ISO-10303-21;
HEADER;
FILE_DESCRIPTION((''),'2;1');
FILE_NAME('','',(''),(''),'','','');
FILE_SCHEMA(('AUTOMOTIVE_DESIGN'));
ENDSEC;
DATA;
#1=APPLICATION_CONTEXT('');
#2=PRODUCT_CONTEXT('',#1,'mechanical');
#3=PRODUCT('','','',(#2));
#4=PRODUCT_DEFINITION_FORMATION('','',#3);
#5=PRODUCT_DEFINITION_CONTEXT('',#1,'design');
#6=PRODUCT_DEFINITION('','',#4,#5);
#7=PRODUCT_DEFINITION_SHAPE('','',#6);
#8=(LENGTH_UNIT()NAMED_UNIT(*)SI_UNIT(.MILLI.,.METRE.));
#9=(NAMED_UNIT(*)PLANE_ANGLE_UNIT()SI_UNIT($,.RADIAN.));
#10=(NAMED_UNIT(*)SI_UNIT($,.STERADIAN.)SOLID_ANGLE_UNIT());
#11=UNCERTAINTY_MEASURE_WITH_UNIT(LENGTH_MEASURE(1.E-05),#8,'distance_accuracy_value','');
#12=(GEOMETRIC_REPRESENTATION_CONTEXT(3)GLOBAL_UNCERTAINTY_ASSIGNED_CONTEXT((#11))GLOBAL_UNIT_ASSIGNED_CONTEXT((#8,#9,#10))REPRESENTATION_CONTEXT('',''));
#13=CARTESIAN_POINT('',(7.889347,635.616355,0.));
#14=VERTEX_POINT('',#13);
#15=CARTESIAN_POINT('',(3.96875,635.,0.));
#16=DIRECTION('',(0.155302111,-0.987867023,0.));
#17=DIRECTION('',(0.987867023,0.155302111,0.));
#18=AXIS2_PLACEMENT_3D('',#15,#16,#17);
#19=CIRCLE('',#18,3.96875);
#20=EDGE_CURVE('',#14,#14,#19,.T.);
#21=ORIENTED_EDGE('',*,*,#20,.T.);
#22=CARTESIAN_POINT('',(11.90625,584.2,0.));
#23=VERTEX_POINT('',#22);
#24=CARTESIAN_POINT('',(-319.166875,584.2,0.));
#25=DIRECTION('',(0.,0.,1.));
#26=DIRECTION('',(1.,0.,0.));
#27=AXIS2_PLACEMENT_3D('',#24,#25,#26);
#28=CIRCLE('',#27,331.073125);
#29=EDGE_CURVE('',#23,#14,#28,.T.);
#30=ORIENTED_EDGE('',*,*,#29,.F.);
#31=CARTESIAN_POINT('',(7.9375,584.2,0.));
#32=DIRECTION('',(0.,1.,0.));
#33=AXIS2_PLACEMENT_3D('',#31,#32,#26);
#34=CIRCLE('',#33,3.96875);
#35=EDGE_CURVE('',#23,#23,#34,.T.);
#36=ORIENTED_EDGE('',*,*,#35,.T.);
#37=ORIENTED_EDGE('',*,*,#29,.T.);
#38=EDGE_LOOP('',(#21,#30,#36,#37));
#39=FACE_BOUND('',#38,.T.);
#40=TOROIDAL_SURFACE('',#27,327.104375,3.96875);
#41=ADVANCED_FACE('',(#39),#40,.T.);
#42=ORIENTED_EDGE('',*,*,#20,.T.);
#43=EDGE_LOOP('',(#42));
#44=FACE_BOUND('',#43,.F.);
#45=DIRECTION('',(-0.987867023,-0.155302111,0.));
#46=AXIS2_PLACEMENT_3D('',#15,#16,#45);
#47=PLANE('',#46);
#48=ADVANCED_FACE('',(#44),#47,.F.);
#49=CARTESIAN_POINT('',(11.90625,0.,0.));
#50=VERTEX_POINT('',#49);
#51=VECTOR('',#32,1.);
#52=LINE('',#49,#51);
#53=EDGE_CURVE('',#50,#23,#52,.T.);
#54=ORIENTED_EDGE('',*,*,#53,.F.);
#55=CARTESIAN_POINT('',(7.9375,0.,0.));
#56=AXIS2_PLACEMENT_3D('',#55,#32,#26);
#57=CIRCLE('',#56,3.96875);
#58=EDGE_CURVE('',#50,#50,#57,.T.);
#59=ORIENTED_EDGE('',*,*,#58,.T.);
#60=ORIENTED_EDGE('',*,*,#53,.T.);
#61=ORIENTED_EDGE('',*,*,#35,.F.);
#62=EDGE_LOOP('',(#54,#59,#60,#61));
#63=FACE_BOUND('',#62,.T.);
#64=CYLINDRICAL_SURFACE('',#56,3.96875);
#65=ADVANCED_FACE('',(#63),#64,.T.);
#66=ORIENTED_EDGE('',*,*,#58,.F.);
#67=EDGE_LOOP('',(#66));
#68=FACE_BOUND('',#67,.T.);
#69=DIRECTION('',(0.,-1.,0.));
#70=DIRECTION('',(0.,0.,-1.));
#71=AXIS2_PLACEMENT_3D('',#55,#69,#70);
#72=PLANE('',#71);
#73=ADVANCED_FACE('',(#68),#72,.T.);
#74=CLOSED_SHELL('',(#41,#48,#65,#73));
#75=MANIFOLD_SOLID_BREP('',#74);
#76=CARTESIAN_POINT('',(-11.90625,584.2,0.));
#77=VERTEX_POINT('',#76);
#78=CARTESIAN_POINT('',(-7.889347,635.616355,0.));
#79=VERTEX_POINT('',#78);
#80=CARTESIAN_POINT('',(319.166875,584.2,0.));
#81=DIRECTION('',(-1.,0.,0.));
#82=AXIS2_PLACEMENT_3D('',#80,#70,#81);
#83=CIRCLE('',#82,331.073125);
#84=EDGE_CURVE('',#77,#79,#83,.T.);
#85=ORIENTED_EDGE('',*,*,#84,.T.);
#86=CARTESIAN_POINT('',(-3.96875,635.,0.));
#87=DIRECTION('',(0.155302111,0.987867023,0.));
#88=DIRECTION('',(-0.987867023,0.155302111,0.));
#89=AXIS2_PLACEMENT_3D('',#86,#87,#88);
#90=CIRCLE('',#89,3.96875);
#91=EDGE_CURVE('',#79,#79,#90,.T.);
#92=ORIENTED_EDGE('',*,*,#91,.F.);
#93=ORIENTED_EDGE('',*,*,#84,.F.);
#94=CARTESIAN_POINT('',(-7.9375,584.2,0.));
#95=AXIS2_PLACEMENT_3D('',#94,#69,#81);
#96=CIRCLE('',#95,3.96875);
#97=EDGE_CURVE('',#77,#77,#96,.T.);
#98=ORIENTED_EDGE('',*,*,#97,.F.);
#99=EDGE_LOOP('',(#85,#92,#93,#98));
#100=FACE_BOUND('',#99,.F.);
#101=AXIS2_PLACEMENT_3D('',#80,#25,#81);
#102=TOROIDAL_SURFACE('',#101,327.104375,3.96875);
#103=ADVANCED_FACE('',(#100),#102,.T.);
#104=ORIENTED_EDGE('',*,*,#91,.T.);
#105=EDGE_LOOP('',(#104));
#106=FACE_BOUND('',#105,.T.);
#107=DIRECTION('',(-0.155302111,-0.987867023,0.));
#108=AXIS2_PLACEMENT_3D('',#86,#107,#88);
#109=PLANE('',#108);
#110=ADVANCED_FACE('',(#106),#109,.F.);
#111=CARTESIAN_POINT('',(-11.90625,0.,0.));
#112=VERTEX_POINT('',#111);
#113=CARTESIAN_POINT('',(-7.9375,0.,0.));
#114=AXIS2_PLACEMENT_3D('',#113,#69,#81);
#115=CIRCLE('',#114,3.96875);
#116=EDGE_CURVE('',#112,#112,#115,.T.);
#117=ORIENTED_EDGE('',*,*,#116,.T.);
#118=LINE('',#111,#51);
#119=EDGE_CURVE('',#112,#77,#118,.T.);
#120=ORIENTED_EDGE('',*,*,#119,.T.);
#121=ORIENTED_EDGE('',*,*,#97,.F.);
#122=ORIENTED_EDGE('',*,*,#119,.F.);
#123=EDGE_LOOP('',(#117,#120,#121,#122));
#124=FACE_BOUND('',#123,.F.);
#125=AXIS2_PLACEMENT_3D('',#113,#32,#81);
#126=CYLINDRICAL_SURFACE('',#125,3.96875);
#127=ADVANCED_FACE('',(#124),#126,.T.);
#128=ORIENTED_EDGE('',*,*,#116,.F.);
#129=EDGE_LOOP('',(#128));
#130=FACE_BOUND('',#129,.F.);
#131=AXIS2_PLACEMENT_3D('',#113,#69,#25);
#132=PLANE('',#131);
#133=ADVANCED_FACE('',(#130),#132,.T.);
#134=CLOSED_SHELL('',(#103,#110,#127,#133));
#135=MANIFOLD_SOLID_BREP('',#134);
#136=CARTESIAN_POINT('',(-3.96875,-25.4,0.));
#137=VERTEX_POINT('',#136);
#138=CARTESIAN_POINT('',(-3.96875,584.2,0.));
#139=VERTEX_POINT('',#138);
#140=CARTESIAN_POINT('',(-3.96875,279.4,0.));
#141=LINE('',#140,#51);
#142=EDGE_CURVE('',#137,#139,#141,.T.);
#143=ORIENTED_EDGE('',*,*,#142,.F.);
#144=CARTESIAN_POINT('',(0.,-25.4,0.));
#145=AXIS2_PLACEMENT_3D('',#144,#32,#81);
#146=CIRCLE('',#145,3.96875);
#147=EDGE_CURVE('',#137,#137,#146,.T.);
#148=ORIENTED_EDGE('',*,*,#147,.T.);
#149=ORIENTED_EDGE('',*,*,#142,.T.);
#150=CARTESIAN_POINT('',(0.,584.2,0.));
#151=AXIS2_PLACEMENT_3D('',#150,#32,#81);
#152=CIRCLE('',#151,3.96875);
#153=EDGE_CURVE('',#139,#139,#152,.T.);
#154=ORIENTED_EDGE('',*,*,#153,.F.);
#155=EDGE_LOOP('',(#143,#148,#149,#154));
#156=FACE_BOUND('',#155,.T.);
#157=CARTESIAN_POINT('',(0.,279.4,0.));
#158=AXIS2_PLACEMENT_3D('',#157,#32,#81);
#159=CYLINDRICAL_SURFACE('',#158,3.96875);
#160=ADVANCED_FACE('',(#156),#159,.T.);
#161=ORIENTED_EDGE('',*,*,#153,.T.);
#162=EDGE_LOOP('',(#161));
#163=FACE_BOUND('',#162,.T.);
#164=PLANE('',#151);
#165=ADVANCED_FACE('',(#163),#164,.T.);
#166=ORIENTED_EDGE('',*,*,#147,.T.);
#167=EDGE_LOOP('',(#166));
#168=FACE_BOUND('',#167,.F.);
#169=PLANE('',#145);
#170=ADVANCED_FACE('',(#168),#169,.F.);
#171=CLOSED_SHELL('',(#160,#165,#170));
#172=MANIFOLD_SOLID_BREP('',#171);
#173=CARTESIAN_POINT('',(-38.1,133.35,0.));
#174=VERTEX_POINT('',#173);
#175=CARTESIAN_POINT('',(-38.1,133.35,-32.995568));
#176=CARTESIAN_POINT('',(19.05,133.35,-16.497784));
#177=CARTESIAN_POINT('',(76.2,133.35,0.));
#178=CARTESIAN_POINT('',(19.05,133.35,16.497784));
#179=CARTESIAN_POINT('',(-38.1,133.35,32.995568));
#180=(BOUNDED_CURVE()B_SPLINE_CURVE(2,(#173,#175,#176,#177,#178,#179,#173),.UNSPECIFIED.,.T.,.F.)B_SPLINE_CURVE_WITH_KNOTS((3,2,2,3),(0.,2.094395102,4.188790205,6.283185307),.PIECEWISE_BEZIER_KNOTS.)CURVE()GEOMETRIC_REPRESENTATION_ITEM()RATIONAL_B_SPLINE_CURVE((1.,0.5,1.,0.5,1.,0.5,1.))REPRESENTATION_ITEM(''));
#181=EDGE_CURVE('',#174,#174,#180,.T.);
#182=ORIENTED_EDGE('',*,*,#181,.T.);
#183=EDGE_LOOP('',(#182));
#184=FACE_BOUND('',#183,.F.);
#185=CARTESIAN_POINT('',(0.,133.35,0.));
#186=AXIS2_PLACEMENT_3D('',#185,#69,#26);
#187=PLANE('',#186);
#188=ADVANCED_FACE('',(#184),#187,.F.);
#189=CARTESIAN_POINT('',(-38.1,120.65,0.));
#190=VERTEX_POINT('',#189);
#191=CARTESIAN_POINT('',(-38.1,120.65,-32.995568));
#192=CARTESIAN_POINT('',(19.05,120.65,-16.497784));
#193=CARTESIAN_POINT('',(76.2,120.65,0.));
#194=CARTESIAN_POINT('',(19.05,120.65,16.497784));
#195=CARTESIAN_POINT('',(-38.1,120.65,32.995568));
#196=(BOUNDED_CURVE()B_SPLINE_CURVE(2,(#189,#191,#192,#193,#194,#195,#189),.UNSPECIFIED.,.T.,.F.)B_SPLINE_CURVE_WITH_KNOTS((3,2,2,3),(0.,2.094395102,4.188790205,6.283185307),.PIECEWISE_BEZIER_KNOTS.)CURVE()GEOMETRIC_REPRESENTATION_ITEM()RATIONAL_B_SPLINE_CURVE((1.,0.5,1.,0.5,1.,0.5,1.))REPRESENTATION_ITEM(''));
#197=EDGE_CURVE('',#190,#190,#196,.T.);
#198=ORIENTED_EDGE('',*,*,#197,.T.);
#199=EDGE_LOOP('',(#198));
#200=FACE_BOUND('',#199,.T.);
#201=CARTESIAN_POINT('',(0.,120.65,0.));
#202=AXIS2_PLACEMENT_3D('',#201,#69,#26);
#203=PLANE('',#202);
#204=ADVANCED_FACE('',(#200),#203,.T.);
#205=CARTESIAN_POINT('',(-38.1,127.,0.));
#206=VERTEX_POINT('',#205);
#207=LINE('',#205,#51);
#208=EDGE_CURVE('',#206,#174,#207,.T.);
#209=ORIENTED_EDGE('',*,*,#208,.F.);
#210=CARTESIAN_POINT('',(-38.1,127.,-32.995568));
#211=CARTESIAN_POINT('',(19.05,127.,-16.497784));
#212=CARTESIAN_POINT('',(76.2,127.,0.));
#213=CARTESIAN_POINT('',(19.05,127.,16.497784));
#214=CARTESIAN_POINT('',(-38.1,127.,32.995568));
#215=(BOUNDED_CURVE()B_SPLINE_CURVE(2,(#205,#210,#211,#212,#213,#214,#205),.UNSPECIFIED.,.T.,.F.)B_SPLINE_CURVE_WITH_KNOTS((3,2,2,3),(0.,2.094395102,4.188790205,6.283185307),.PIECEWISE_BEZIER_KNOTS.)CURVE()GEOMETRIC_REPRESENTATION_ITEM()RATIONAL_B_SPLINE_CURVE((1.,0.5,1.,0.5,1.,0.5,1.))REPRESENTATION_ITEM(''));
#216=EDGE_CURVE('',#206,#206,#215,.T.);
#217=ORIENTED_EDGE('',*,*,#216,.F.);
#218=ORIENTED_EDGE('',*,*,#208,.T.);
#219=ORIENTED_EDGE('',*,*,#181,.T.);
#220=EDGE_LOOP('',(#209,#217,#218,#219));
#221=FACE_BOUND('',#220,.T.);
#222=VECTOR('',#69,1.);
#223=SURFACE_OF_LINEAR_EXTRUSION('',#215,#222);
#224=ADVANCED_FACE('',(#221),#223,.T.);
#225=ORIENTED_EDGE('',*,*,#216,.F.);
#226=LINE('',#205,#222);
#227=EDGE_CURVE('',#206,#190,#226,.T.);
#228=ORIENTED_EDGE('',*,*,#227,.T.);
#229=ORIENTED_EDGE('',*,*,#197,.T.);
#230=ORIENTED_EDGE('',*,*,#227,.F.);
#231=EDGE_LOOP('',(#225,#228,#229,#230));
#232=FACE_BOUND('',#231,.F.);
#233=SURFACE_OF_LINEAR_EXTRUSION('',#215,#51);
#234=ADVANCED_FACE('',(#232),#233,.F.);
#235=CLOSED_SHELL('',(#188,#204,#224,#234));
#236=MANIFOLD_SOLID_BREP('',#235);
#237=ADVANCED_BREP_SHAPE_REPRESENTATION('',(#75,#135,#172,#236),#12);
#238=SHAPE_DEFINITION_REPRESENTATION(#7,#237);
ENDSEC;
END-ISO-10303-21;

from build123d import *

# Parameters (mm, degrees)
F0_W     = 3.96875
F0_H     = 609.6
F2_R     = 3.96875
F8_DEPTH = 6.35


with BuildPart() as f1:
    # F0 (on Top) → F1 (revolve)
    with BuildSketch(Plane.XY):
        with Locations((-1.984375, 279.4)):
            Rectangle(F0_W, F0_H)
    revolve(axis=Axis((0, 279.4, 0), (0, 1, 0)))


with BuildPart() as f4:
    # F4: sweep along a path in F3
    with BuildLine(Plane.XY) as f4_path:
        Line((7.9375, 0), (7.9375, 584.2))
        ThreePointArc((7.9375, 584.2), (6.9438031447, 609.6773967301), (3.96875, 635))
    # F2 (on Front) → F4 (sweep)
    with BuildSketch(Plane.XZ):
        with Locations((7.9375, 0)):
            Circle(F2_R)
    sweep(path=f4_path.line)


with BuildPart() as f5_1:
    # F5: instance of F4
    add(f4.part.mirror(Plane.YZ))


with BuildPart() as f8:
    # F7 (on offset) → F8 (new body, symmetric)
    with BuildSketch(Plane.XZ.offset(-127)):
        with BuildLine():
            add(Edge.make_bspline(
                [(-38.1, 0), (-38.1, -32.9955678842), (19.05, -16.4977839421), (76.2, 0), (19.05, 16.4977839421), (-38.1, 32.9955678842), (-38.1, 0)],
                knots=[0, 0, 0, 2.0943951024, 2.0943951024, 4.1887902048, 4.1887902048, 6.2831853072, 6.2831853072, 6.2831853072], degree=2, weights=[1, 0.5, 1, 0.5, 1, 0.5, 1]))
        make_face()
    extrude(amount=F8_DEPTH, both=True)


solid = Compound([f1.part, f4.part, f5_1.part, f8.part])
